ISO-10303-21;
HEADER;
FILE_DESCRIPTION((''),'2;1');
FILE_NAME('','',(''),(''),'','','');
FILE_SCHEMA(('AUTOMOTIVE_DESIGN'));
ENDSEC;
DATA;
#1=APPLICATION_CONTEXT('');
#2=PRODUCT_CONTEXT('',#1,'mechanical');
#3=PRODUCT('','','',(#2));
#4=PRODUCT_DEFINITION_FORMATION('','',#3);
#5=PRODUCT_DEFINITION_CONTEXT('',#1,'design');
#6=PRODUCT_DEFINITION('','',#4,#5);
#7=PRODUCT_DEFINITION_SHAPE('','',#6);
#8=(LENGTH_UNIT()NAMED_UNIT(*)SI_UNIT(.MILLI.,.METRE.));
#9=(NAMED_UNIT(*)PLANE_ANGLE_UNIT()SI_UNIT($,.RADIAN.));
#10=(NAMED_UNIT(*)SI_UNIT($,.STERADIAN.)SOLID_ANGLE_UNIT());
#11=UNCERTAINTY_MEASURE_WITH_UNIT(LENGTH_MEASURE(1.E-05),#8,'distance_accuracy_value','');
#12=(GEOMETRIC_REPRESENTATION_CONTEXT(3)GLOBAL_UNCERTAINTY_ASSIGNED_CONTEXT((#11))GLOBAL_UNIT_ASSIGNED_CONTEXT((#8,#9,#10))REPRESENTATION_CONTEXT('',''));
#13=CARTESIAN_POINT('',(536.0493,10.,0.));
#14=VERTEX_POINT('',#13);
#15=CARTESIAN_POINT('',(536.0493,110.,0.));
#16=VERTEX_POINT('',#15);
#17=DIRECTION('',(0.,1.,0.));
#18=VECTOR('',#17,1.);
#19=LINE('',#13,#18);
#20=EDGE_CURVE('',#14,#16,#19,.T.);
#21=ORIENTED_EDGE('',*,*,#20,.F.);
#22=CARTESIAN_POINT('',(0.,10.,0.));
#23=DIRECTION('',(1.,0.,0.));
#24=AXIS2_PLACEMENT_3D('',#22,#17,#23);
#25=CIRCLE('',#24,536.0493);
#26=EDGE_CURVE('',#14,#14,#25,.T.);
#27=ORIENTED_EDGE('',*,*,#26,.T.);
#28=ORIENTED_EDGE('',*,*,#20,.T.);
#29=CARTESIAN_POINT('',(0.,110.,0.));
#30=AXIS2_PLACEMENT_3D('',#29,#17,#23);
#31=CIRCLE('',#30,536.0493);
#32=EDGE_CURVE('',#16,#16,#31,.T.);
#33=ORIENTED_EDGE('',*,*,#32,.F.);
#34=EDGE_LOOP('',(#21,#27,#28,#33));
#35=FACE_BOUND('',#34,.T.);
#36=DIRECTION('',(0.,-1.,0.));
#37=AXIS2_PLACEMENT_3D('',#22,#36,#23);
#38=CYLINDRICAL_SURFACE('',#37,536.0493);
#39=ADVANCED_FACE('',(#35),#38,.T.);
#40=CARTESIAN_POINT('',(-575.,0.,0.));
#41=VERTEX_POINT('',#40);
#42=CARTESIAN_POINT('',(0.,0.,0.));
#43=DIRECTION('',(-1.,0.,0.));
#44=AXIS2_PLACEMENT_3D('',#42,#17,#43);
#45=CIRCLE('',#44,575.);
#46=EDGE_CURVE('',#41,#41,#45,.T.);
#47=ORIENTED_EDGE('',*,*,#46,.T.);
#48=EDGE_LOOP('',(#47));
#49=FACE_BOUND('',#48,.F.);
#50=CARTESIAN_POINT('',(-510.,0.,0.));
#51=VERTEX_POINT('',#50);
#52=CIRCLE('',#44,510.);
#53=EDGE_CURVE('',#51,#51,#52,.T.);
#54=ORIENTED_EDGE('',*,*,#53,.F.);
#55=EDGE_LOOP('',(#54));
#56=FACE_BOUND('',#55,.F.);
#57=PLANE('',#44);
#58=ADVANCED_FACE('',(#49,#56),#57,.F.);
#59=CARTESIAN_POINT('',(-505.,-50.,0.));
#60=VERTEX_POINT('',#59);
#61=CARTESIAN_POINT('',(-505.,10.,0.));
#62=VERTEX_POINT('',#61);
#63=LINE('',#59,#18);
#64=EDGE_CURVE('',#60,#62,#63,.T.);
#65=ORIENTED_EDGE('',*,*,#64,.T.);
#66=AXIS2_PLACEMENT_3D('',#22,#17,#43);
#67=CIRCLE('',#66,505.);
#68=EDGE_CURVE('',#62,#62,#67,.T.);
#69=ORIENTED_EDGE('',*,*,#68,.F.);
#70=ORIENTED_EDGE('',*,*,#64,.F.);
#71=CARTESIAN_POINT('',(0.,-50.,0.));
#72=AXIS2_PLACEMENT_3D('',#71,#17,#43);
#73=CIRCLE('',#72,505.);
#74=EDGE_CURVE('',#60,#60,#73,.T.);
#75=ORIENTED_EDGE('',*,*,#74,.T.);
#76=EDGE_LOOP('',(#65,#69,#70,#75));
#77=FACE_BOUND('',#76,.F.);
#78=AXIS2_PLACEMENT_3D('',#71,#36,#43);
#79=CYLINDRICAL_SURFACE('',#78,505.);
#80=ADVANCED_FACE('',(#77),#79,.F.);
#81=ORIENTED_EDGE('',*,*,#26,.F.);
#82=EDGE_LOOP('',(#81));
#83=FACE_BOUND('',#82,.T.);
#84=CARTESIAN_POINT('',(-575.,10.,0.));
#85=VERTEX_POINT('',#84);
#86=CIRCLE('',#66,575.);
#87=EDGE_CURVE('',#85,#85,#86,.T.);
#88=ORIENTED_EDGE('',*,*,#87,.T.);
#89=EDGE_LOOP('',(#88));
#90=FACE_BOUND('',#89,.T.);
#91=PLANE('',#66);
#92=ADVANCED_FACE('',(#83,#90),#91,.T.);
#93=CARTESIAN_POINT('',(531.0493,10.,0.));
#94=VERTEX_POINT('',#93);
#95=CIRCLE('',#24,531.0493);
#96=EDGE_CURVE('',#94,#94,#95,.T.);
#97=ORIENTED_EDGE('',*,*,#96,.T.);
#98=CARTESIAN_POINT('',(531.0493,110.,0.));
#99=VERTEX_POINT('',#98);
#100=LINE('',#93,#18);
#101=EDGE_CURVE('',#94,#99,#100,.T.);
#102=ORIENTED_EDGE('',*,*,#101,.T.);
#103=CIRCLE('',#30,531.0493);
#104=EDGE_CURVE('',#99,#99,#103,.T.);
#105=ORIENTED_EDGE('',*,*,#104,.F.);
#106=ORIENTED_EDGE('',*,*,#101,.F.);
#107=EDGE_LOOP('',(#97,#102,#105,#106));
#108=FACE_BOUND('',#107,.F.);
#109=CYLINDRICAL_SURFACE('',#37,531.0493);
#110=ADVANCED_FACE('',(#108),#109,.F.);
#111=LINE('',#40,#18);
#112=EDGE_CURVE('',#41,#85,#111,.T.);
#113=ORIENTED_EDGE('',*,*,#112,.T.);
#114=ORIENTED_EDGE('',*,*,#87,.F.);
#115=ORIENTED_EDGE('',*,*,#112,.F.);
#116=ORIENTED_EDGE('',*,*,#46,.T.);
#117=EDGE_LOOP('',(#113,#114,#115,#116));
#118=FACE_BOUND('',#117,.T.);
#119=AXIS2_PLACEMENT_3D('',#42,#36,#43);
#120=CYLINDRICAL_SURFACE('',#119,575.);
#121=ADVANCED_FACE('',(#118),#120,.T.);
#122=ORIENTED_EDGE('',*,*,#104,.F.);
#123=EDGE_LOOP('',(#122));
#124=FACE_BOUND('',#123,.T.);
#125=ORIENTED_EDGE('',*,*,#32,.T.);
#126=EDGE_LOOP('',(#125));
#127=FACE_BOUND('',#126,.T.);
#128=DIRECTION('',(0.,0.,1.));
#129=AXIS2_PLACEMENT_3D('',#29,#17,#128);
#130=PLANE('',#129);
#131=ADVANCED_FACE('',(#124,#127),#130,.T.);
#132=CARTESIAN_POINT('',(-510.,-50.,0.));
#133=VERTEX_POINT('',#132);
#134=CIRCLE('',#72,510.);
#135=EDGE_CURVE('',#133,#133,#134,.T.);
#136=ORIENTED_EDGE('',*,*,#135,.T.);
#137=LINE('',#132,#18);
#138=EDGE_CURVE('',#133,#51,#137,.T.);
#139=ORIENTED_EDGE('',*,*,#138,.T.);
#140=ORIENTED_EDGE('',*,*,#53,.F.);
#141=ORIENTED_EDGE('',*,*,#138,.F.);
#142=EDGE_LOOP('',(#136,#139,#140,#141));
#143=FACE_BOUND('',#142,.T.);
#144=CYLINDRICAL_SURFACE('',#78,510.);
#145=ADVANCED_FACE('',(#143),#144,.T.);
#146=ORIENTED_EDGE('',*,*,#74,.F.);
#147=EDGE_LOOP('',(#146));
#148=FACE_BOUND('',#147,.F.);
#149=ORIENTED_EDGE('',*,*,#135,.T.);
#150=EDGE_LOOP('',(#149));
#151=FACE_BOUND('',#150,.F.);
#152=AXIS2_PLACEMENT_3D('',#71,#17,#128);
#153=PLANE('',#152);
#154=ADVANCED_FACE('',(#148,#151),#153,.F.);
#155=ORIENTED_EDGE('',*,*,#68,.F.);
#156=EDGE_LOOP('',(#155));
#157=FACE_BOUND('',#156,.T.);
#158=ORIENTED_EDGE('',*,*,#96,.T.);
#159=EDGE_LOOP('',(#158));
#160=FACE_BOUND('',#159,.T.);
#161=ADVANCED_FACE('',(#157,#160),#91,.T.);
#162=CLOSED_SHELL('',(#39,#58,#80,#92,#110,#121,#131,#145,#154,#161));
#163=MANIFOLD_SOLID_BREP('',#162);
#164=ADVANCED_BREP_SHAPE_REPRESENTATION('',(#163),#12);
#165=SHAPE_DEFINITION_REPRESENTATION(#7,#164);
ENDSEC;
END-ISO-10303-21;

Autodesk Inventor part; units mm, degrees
ref_plane "YZ Plane" through (0, 0, 0) normal (1, 0, 0) x (0, 1, 0)
ref_plane "XZ Plane" through (0, 0, 0) normal (0, 1, 0) x (-1, 0, 0)
ref_plane "XY Plane" through (0, 0, 0) normal (0, 0, 1) x (1, 0, 0)
sketch "草图1" plane through (0, 0, 0) normal (0, 1, 0) x (-1, 0, 0)
  circle A0 centre (0, 0) radius 575
  circle A1 centre (0, 0) radius 510
  dimension "d0" = 1150
  dimension "d1" = 1020
extrude "拉伸1" add sketch "草图1" along normal blind 10
sketch "草图2" plane through (0, 0, 0) normal (0, 1, 0) x (-1, 0, 0)
  circle A0 centre (0, 0) radius 510 projected
surface extrude "拉伸曲面1" sketch "草图2" along normal blind 10 and the other way blind 50 shown no curves A0
thicken "加厚1" operation add thickness 5 both sides no extend neighbours no toward (0.7479816, 0, 0.6637194) faces at (-381.4706, 6.6667, -338.4969) (-381.4706, -30, -338.4969)
sketch "草图3" plane through (0, 10, 0) normal (0, 1, 0) x (1, 0, 0)
  circle A0 centre (0, 0) radius 575 projected
  circle A1 centre (0, 0) radius 536.0493
surface extrude "拉伸曲面2" sketch "草图3" along normal blind 100 shown no curves A1
thicken "加厚2" operation add thickness 5 both sides no extend neighbours no toward (-0.9991732, 0, -0.0406567) faces at (535.606, 76.6667, 21.794)
sketch "草图4" plane through (0, 110, 0) normal (0, 1, 0) x (1, 0, 0)
  circle A0 centre (0, 0) radius 536.0493 projected
  circle A1 centre (0, 0) radius 531.0493 projected
  line L0 (531.0493, 0) -> (505.0579, -164.1032)
  line L1 (505.0579, -164.1032) -> (429.6279, -312.1429)
  line L2 (429.6279, -312.1429) -> (312.1429, -429.6279)
  line L3 (312.1429, -429.6279) -> (164.1032, -505.0579)
  line L4 (164.1032, -505.0579) -> (0, -531.0493)
  line L5 (0, -531.0493) -> (-164.1032, -505.0579)
  line L6 (-164.1032, -505.0579) -> (-312.1429, -429.6279)
  line L7 (-312.1429, -429.6279) -> (-429.6279, -312.1429)
  line L8 (-429.6279, -312.1429) -> (-505.0579, -164.1032)
  line L9 (-505.0579, -164.1032) -> (-531.0493, 0)
  line L10 (-531.0493, 0) -> (-505.0579, 164.1032)
  line L11 (-505.0579, 164.1032) -> (-429.6279, 312.1429)
  line L12 (-429.6279, 312.1429) -> (-312.1429, 429.6279)
  line L13 (-312.1429, 429.6279) -> (-164.1032, 505.0579)
  line L14 (-164.1032, 505.0579) -> (0, 531.0493)
  line L15 (0, 531.0493) -> (164.1032, 505.0579)
  line L16 (164.1032, 505.0579) -> (312.1429, 429.6279)
  line L17 (312.1429, 429.6279) -> (429.6279, 312.1429)
  line L18 (429.6279, 312.1429) -> (505.0579, 164.1032)
  line L19 (505.0579, 164.1032) -> (531.0493, 0)
  line L20 (-531.0493, 0) -> (531.0493, 0)
  line L21 (-505.0579, 164.1032) -> (-505.0579, -164.1032)
  line L22 (-429.6279, 312.1429) -> (-429.6279, -312.1429)
  line L23 (-312.1429, 429.6279) -> (-312.1429, -429.6279)
  line L24 (-164.1032, 505.0579) -> (-164.1032, -505.0579)
  line L25 (0, 531.0493) -> (0, -531.0493)
  line L26 (164.1032, 505.0579) -> (164.1032, -505.0579)
  line L27 (312.1429, -429.6279) -> (312.1429, 429.6279)
  line L28 (429.6279, 312.1429) -> (429.6279, -312.1429)
  line L29 (505.0579, -164.1032) -> (505.0579, 164.1032)
  line L30 (-164.1032, 505.0579) -> (164.1032, 505.0579)
  line L31 (312.1429, 429.6279) -> (-312.1429, 429.6279)
  line L32 (-429.6279, 312.1429) -> (429.6279, 312.1429)
  line L33 (505.0579, 164.1032) -> (-505.0579, 164.1032)
  line L34 (-505.0579, -164.1032) -> (505.0579, -164.1032)
  line L35 (-429.6279, -312.1429) -> (429.6279, -312.1429)
  line L36 (312.1429, -429.6279) -> (-312.1429, -435.7931)
  line L37 (-164.1032, -505.0579) -> (164.1032, -505.0579)
  line L38 (-312.1429, 429.6279) -> (-505.0579, 164.1032)
  line L39 (-505.0579, -164.1032) -> (-312.1429, -435.7931)
  line L40 (0, -531.0493) -> (-312.1429, -435.7931)
  line L41 (0, -531.0493) -> (312.1429, -429.6279)
  line L42 (312.1429, -429.6279) -> (505.0579, -164.1032)
  line L43 (505.0579, 164.1032) -> (312.1429, 429.6279)
  line L44 (312.1429, 429.6279) -> (0, 531.0493)
  line L45 (531.0493, 0) -> (-312.1429, -435.7931)
  line L46 (-312.1429, 429.6279) -> (531.0493, 0)
  line L47 (312.1429, 429.6279) -> (164.1032, -505.0579)
  line L48 (164.1032, -505.0579) -> (-505.0579, 164.1032)
  line L49 (-505.0579, 164.1032) -> (312.1429, 429.6279)
  line L50 (-429.6279, -312.1429) -> (429.6279, -312.1429)
  line L51 (0, 531.0493) -> (435.7931, -312.1429)
  line L52 (-429.6279, -312.1429) -> (0, 531.0493)
  line L53 (-312.1429, -429.6279) -> (505.0579, -164.1032)
  line L54 (-312.1429, -429.6279) -> (-164.1032, 505.0579)
  line L55 (-164.1032, 505.0579) -> (510.9213, -162.1981)
  line L56 (-505.9804, -165.9401) -> (161.2755, 509.0845)
  line L57 (428.7053, -313.9798) -> (-505.9804, -165.9401)
  line L58 (429.6279, -312.1429) -> (164.1032, 505.0579)
  line L59 (164.1032, -505.0579) -> (-505.0579, 164.1032)
  line L60 (-505.0579, 164.1032) -> (431.533, 318.0064)
  line L61 (164.1032, -505.0579) -> (429.6279, 312.1429)
  line L62 (-429.6279, 312.1429) -> (508.6817, 169.091)
  line L63 (0, -531.0493) -> (-429.6279, 312.1429)
  line L64 (0, -531.0493) -> (505.0579, 164.1032)
  line L65 (311.2203, -431.4647) -> (-536.9596, -5.4607)
  line L66 (164.1032, 505.0579) -> (-531.0493, 0)
  line L67 (163.1807, 503.221) -> (311.2203, -431.4647)
  line L68 (-316.3703, 426.5245) -> (535.9751, 8.9171)
  line L69 (-159.1077, -506.6538) -> (531.0234, 5.2442)
  line L70 (-159.1077, -506.6538) -> (-316.3703, 426.5245)
  line L71 (508.2003, -154.0967) -> (-425.1685, -326.4668)
  line L72 (-174.0458, 501.7184) -> (508.2003, -154.0967)
  line L73 (-174.0458, 501.7184) -> (-423.3795, -320.5669)
  line L74 (-111.947, 217.7208) -> (244.5252, -11.9114)
  line L75 (244.5252, -11.9114) -> (-132.5782, -205.8094)
  line L76 (-132.5782, -205.8094) -> (-111.947, 217.7208)
  line L77 (-210.9866, 63.9755) -> (160.8977, 150.7321)
  line L78 (160.8977, 150.7321) -> (50.0889, -214.7075)
  line L79 (50.0889, -214.7075) -> (-210.9866, 63.9755)
  line L80 (-231.596, -76.5164) -> (49.5329, 238.8263)
  line L81 (49.5329, 238.8263) -> (182.0632, -162.3098)
  line L82 (182.0632, -162.3098) -> (-231.596, -76.5164)
  line L83 (-178.3739, -185.5628) -> (-71.5151, 247.2577)
  line L84 (-71.5151, 247.2577) -> (249.889, -61.6949)
  line L85 (249.889, -61.6949) -> (-178.3739, -185.5628)
  line L86 (-84.545, -232.6889) -> (-159.242, 189.5626)
  line L87 (-159.242, 189.5626) -> (243.787, 43.1263)
  line L88 (243.787, 43.1263) -> (-84.545, -232.6889)
  line L89 (0, -247.9487) -> (-214.7299, 123.9744)
  line L90 (-214.7299, 123.9744) -> (214.7299, 123.9744)
  line L91 (214.7299, 123.9744) -> (0, -247.9487)
  line L92 (79.8324, -233.2057) -> (-241.8782, 47.466)
  line L93 (-241.8782, 47.466) -> (162.0458, 185.7397)
  line L94 (162.0458, 185.7397) -> (79.8324, -233.2057)
  line L95 (218.5126, -161.5306) -> (-249.1459, -108.4722)
  line L96 (-249.1459, -108.4722) -> (30.6333, 270.0028)
  line L97 (30.6333, 270.0028) -> (218.5126, -161.5306)
  point P0 (0, 0)
  point P1 (0, 0)
  point P2 (0, 0)
  point P3 (0, 0)
sketch "草图5" plane through (0, 10, 0) normal (0, 1, 0) x (1, 0, 0)
  circle A0 centre (0, 0) radius 531.0493 projected
  circle A1 centre (0, 0) radius 505 projected
  circle A2 centre (0, 0) radius 536.0493
  circle A3 centre (0, 0) radius 531.0493
  line L0 (531.0493, 0) -> (505.0579, -164.1032)
  line L1 (505.0579, -164.1032) -> (429.6279, -312.1429)
  line L2 (429.6279, -312.1429) -> (312.1429, -429.6279)
  line L3 (312.1429, -429.6279) -> (164.1032, -505.0579)
  line L4 (164.1032, -505.0579) -> (0, -531.0493)
  line L5 (0, -531.0493) -> (-164.1032, -505.0579)
  line L6 (-164.1032, -505.0579) -> (-312.1429, -429.6279)
  line L7 (-312.1429, -429.6279) -> (-429.6279, -312.1429)
  line L8 (-429.6279, -312.1429) -> (-505.0579, -164.1032)
  line L9 (-505.0579, -164.1032) -> (-531.0493, 0)
  line L10 (-531.0493, 0) -> (-505.0579, 164.1032)
  line L11 (-505.0579, 164.1032) -> (-429.6279, 312.1429)
  line L12 (-429.6279, 312.1429) -> (-312.1429, 429.6279)
  line L13 (-312.1429, 429.6279) -> (-164.1032, 505.0579)
  line L14 (-164.1032, 505.0579) -> (0, 531.0493)
  line L15 (0, 531.0493) -> (164.1032, 505.0579)
  line L16 (164.1032, 505.0579) -> (312.1429, 429.6279)
  line L17 (312.1429, 429.6279) -> (429.6279, 312.1429)
  line L18 (429.6279, 312.1429) -> (505.0579, 164.1032)
  line L19 (505.0579, 164.1032) -> (531.0493, 0)
  line L20 (-531.0493, 0) -> (531.0493, 0)
  line L21 (-505.0579, 164.1032) -> (-505.0579, -164.1032)
  line L22 (-429.6279, 312.1429) -> (-429.6279, -312.1429)
  line L23 (-312.1429, 429.6279) -> (-312.1429, -429.6279)
  line L24 (-164.1032, 505.0579) -> (-164.1032, -505.0579)
  line L25 (0, 531.0493) -> (0, -531.0493)
  line L26 (164.1032, 505.0579) -> (164.1032, -505.0579)
  line L27 (312.1429, -429.6279) -> (312.1429, 429.6279)
  line L28 (429.6279, 312.1429) -> (429.6279, -312.1429)
  line L29 (505.0579, -164.1032) -> (505.0579, 164.1032)
  line L30 (-164.1032, 505.0579) -> (164.1032, 505.0579)
  line L31 (312.1429, 429.6279) -> (-312.1429, 429.6279)
  line L32 (-429.6279, 312.1429) -> (429.6279, 312.1429)
  line L33 (505.0579, 164.1032) -> (-505.0579, 164.1032)
  line L34 (-505.0579, -164.1032) -> (505.0579, -164.1032)
  line L35 (-429.6279, -312.1429) -> (429.6279, -312.1429)
  line L36 (312.1429, -429.6279) -> (-312.1429, -435.7931)
  line L37 (-164.1032, -505.0579) -> (164.1032, -505.0579)
  line L38 (-312.1429, 429.6279) -> (-505.0579, 164.1032)
  line L39 (-505.0579, -164.1032) -> (-312.1429, -435.7931)
  line L40 (0, -531.0493) -> (-312.1429, -435.7931)
  line L41 (0, -531.0493) -> (312.1429, -429.6279)
  line L42 (312.1429, -429.6279) -> (505.0579, -164.1032)
  line L43 (505.0579, 164.1032) -> (312.1429, 429.6279)
  line L44 (312.1429, 429.6279) -> (0, 531.0493)
  line L45 (531.0493, 0) -> (-312.1429, -435.7931)
  line L46 (-312.1429, 429.6279) -> (531.0493, 0)
  line L47 (312.1429, 429.6279) -> (164.1032, -505.0579)
  line L48 (164.1032, -505.0579) -> (-505.0579, 164.1032)
  line L49 (-505.0579, 164.1032) -> (312.1429, 429.6279)
  line L50 (-429.6279, -312.1429) -> (429.6279, -312.1429)
  line L51 (-429.6279, -312.1429) -> (0, 531.0493)
  line L52 (0, 531.0493) -> (435.7931, -312.1429)
  line L53 (-164.1032, 505.0579) -> (510.9213, -162.1981)
  line L54 (-312.1429, -429.6279) -> (-164.1032, 505.0579)
  line L55 (-312.1429, -429.6279) -> (505.0579, -164.1032)
  line L56 (428.7053, -313.9798) -> (-505.9804, -165.9401)
  line L57 (-505.9804, -165.9401) -> (161.2755, 509.0845)
  line L58 (429.6279, -312.1429) -> (164.1032, 505.0579)
  line L59 (-505.0579, 164.1032) -> (431.533, 318.0064)
  line L60 (164.1032, -505.0579) -> (-505.0579, 164.1032)
  line L61 (164.1032, -505.0579) -> (429.6279, 312.1429)
  line L62 (-429.6279, 312.1429) -> (508.6817, 169.091)
  line L63 (0, -531.0493) -> (505.0579, 164.1032)
  line L64 (0, -531.0493) -> (-429.6279, 312.1429)
  line L65 (311.2203, -431.4647) -> (-536.9596, -5.4607)
  line L66 (164.1032, 505.0579) -> (-531.0493, 0)
  line L67 (163.1807, 503.221) -> (311.2203, -431.4647)
  line L68 (-316.3703, 426.5245) -> (535.9751, 8.9171)
  line L69 (-159.1077, -506.6538) -> (-316.3703, 426.5245)
  line L70 (-159.1077, -506.6538) -> (531.0234, 5.2442)
  line L71 (-174.0458, 501.7184) -> (-423.3795, -320.5669)
  line L72 (-174.0458, 501.7184) -> (508.2003, -154.0967)
  line L73 (508.2003, -154.0967) -> (-425.1685, -326.4668)
  line L74 (-111.947, 217.7208) -> (244.5252, -11.9114)
  line L75 (244.5252, -11.9114) -> (-132.5782, -205.8094)
  line L76 (-132.5782, -205.8094) -> (-111.947, 217.7208)
  line L77 (-210.9866, 63.9755) -> (160.8977, 150.7321)
  line L78 (160.8977, 150.7321) -> (50.0889, -214.7075)
  line L79 (50.0889, -214.7075) -> (-210.9866, 63.9755)
  line L80 (-231.596, -76.5164) -> (49.5329, 238.8263)
  line L81 (49.5329, 238.8263) -> (182.0632, -162.3098)
  line L82 (182.0632, -162.3098) -> (-231.596, -76.5164)
  line L83 (-178.3739, -185.5628) -> (-71.5151, 247.2577)
  line L84 (-71.5151, 247.2577) -> (249.889, -61.6949)
  line L85 (249.889, -61.6949) -> (-178.3739, -185.5628)
  line L86 (-84.545, -232.6889) -> (-159.242, 189.5626)
  line L87 (-159.242, 189.5626) -> (243.787, 43.1263)
  line L88 (243.787, 43.1263) -> (-84.545, -232.6889)
  line L89 (0, -247.9487) -> (-214.7299, 123.9744)
  line L90 (-214.7299, 123.9744) -> (214.7299, 123.9744)
  line L91 (214.7299, 123.9744) -> (0, -247.9487)
  line L92 (79.8324, -233.2057) -> (-241.8782, 47.466)
  line L93 (-241.8782, 47.466) -> (162.0458, 185.7397)
  line L94 (162.0458, 185.7397) -> (79.8324, -233.2057)
  line L95 (218.5126, -161.5306) -> (-249.1459, -108.4722)
  line L96 (-249.1459, -108.4722) -> (30.6333, 270.0028)
  line L97 (30.6333, 270.0028) -> (218.5126, -161.5306)
  point P0 (0, 0)
  point P1 (0, 0)
  point P2 (0, 0)
  point P3 (0, 0)
properties part number "除沫器"
